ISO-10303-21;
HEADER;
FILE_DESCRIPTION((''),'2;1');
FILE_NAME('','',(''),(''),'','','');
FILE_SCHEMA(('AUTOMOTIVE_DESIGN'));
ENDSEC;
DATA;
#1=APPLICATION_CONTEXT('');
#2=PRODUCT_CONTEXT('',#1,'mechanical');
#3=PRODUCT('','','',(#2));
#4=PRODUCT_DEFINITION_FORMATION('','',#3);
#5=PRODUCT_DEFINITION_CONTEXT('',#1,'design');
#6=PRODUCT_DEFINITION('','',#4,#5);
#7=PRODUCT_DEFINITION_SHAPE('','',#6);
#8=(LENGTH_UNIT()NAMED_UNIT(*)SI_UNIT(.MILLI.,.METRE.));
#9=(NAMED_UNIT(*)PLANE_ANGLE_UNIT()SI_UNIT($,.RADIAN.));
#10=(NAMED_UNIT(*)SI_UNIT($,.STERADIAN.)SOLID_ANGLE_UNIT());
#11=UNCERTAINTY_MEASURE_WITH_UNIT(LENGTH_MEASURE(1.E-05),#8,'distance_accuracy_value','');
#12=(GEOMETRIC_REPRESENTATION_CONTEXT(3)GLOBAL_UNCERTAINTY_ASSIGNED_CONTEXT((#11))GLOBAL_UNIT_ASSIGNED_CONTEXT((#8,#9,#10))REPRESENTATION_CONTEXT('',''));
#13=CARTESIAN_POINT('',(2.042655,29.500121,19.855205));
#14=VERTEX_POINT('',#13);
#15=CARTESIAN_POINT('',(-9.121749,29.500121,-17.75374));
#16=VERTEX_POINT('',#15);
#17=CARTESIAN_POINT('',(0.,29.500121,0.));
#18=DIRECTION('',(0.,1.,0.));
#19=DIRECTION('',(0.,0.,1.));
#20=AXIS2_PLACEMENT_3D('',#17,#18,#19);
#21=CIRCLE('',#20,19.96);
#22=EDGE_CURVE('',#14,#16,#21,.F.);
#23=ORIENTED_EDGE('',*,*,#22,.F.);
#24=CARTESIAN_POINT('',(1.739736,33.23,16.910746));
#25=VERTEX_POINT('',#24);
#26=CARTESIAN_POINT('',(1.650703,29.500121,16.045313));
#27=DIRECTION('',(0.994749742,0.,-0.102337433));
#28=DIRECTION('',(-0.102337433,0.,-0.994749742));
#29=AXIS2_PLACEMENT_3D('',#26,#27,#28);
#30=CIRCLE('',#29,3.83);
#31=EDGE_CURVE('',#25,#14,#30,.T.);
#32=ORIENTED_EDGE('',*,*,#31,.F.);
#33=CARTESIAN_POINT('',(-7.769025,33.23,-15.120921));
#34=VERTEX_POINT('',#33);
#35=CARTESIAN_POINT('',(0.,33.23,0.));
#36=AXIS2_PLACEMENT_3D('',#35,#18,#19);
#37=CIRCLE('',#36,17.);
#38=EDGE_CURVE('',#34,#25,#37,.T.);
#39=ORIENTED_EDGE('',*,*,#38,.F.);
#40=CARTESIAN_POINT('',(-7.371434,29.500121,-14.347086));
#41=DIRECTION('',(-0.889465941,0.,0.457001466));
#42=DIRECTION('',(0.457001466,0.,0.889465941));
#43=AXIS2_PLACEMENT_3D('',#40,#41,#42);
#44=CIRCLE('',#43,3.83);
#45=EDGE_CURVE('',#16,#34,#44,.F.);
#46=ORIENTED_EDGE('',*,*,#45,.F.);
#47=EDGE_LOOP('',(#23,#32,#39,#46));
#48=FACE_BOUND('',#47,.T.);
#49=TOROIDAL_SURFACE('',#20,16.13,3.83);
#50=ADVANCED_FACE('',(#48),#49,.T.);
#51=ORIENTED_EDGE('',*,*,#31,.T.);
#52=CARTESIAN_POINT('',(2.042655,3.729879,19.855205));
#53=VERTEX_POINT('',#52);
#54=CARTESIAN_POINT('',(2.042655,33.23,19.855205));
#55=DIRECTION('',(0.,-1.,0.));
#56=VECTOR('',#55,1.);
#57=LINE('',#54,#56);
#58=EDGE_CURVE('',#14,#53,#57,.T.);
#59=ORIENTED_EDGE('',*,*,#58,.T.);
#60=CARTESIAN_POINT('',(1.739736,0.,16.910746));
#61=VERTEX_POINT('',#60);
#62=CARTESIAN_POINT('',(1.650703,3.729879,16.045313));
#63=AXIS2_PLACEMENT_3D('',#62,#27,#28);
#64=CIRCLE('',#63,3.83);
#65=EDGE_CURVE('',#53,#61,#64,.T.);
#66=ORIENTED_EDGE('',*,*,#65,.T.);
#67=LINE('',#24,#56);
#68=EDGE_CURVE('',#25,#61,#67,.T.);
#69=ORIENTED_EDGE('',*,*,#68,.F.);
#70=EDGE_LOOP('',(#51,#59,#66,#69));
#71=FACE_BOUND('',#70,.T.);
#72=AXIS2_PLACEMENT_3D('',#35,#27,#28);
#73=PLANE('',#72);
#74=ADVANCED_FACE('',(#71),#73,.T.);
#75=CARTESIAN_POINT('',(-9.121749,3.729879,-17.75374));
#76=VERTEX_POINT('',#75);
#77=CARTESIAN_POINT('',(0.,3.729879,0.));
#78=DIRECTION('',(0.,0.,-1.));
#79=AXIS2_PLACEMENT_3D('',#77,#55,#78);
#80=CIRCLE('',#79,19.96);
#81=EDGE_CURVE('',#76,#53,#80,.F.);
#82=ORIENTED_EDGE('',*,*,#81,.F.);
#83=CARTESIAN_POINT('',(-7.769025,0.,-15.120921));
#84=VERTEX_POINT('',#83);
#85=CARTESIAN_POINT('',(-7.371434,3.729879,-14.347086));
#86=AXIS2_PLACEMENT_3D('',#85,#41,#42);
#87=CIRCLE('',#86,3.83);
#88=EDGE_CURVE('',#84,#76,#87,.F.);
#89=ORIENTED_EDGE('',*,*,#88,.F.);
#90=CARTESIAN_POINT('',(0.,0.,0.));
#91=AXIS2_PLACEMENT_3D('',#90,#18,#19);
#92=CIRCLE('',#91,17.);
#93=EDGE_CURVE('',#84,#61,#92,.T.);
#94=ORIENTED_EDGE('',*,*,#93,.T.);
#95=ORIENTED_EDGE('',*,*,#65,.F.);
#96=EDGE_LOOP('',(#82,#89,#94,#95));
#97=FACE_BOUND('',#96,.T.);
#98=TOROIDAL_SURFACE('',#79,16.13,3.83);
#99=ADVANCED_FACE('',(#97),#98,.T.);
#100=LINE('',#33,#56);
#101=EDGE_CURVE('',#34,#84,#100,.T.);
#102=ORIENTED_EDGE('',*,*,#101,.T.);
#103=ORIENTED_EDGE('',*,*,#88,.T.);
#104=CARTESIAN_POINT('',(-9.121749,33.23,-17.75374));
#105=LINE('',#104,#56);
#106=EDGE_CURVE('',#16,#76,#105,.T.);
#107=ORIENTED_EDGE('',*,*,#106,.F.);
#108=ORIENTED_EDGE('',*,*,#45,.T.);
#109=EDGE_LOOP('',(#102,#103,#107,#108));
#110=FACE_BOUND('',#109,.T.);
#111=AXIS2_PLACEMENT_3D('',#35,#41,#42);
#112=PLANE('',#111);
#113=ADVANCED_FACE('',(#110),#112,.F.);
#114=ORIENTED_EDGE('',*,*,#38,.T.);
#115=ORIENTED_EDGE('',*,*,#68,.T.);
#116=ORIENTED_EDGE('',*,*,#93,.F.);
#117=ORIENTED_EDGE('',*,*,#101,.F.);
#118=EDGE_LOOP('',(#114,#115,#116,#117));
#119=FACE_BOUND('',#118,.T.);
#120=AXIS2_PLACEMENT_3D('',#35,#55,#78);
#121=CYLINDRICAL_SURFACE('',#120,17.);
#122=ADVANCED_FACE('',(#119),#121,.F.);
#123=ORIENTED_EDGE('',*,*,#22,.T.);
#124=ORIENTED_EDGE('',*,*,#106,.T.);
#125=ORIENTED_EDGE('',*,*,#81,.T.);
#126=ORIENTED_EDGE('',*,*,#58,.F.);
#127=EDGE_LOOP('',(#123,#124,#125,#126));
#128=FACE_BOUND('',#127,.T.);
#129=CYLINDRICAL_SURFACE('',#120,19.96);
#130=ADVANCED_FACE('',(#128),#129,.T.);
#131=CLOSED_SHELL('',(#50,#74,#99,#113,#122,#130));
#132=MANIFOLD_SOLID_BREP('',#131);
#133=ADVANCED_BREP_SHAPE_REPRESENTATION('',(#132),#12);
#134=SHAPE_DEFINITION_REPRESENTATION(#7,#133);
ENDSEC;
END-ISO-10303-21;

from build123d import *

# Parameters (mm, degrees)
BOSS_EXTRUDE1_DEPTH = 33.23
FILLET1_R           = 3.83


with BuildPart() as part:
    # Sketch1 → Boss-Extrude1 (new body)
    with BuildSketch(Plane(origin=(0, 0, 0), x_dir=(1, 0, 0), z_dir=(0, 1, 0))):
        with BuildLine():
            Line((2.042655155, -19.855204857), (1.739736354, -16.91074562))
            ThreePointArc((1.739736354, -16.91074562), (-16.297085527, -4.837871775), (-7.769024925, 15.120920994))
            Line((-7.769024925, 15.120920994), (-9.121749265, 17.753740179))
            ThreePointArc((-9.121749265, 17.753740179), (-19.134695713, -5.680230625), (2.042655155, -19.855204857))
        make_face()
    extrude(amount=BOSS_EXTRUDE1_DEPTH)

    # Fillet1
    # the kernel refuses this fillet: 3.83 mm, written as the material it takes off along each edge
    with BuildSketch(Plane(origin=(0, 0, 0), x_dir=(-0.006868077276749461, 0, -0.9999764144791219), z_dir=(0.9999764144791219, 0, -0.006868077276749461))) as fillet1_piece_1:
        with BuildLine():
            CenterArc((16.13, 3.729879355), FILLET1_R, 283.129576281, 76.870423719)
            Line((17, 0), (17.0174, -0.074597587))
            ThreePointArc((17.0174, -0.074597587), (18.48, -0.0766), (19.96, -0.0766))
            Line((19.96, -0.0766), (20.0366, 0))
            Line((20.0366, 0), (20.0366, 3.729879355))
            Line((20.0366, 3.729879355), (19.96, 3.729879355))
        make_face()
    revolve(axis=Axis((0, 0, 0), (0, 1, 0)), revolution_arc=212.280542546, mode=Mode.SUBTRACT)
    with BuildSketch(Plane(origin=(0, 33.23, 0), x_dir=(-0.006868077276749906, 0, -0.9999764144791219), z_dir=(0.9999764144791219, 0, -0.006868077276749906))) as fillet1_piece_2:
        with BuildLine():
            CenterArc((16.13, -3.729879355), FILLET1_R, 0, 76.870423719)
            Line((17, 0), (17.0174, 0.074597587))
            ThreePointArc((17.0174, 0.074597587), (18.48, 0.0766), (19.96, 0.0766))
            Line((19.96, 0.0766), (20.0366, 0))
            Line((20.0366, 0), (20.0366, -3.729879355))
            Line((20.0366, -3.729879355), (19.96, -3.729879355))
        make_face()
    revolve(axis=Axis((0, 33.23, 0), (0, 1, 0)), revolution_arc=212.280542546, mode=Mode.SUBTRACT)


solid = part.part
